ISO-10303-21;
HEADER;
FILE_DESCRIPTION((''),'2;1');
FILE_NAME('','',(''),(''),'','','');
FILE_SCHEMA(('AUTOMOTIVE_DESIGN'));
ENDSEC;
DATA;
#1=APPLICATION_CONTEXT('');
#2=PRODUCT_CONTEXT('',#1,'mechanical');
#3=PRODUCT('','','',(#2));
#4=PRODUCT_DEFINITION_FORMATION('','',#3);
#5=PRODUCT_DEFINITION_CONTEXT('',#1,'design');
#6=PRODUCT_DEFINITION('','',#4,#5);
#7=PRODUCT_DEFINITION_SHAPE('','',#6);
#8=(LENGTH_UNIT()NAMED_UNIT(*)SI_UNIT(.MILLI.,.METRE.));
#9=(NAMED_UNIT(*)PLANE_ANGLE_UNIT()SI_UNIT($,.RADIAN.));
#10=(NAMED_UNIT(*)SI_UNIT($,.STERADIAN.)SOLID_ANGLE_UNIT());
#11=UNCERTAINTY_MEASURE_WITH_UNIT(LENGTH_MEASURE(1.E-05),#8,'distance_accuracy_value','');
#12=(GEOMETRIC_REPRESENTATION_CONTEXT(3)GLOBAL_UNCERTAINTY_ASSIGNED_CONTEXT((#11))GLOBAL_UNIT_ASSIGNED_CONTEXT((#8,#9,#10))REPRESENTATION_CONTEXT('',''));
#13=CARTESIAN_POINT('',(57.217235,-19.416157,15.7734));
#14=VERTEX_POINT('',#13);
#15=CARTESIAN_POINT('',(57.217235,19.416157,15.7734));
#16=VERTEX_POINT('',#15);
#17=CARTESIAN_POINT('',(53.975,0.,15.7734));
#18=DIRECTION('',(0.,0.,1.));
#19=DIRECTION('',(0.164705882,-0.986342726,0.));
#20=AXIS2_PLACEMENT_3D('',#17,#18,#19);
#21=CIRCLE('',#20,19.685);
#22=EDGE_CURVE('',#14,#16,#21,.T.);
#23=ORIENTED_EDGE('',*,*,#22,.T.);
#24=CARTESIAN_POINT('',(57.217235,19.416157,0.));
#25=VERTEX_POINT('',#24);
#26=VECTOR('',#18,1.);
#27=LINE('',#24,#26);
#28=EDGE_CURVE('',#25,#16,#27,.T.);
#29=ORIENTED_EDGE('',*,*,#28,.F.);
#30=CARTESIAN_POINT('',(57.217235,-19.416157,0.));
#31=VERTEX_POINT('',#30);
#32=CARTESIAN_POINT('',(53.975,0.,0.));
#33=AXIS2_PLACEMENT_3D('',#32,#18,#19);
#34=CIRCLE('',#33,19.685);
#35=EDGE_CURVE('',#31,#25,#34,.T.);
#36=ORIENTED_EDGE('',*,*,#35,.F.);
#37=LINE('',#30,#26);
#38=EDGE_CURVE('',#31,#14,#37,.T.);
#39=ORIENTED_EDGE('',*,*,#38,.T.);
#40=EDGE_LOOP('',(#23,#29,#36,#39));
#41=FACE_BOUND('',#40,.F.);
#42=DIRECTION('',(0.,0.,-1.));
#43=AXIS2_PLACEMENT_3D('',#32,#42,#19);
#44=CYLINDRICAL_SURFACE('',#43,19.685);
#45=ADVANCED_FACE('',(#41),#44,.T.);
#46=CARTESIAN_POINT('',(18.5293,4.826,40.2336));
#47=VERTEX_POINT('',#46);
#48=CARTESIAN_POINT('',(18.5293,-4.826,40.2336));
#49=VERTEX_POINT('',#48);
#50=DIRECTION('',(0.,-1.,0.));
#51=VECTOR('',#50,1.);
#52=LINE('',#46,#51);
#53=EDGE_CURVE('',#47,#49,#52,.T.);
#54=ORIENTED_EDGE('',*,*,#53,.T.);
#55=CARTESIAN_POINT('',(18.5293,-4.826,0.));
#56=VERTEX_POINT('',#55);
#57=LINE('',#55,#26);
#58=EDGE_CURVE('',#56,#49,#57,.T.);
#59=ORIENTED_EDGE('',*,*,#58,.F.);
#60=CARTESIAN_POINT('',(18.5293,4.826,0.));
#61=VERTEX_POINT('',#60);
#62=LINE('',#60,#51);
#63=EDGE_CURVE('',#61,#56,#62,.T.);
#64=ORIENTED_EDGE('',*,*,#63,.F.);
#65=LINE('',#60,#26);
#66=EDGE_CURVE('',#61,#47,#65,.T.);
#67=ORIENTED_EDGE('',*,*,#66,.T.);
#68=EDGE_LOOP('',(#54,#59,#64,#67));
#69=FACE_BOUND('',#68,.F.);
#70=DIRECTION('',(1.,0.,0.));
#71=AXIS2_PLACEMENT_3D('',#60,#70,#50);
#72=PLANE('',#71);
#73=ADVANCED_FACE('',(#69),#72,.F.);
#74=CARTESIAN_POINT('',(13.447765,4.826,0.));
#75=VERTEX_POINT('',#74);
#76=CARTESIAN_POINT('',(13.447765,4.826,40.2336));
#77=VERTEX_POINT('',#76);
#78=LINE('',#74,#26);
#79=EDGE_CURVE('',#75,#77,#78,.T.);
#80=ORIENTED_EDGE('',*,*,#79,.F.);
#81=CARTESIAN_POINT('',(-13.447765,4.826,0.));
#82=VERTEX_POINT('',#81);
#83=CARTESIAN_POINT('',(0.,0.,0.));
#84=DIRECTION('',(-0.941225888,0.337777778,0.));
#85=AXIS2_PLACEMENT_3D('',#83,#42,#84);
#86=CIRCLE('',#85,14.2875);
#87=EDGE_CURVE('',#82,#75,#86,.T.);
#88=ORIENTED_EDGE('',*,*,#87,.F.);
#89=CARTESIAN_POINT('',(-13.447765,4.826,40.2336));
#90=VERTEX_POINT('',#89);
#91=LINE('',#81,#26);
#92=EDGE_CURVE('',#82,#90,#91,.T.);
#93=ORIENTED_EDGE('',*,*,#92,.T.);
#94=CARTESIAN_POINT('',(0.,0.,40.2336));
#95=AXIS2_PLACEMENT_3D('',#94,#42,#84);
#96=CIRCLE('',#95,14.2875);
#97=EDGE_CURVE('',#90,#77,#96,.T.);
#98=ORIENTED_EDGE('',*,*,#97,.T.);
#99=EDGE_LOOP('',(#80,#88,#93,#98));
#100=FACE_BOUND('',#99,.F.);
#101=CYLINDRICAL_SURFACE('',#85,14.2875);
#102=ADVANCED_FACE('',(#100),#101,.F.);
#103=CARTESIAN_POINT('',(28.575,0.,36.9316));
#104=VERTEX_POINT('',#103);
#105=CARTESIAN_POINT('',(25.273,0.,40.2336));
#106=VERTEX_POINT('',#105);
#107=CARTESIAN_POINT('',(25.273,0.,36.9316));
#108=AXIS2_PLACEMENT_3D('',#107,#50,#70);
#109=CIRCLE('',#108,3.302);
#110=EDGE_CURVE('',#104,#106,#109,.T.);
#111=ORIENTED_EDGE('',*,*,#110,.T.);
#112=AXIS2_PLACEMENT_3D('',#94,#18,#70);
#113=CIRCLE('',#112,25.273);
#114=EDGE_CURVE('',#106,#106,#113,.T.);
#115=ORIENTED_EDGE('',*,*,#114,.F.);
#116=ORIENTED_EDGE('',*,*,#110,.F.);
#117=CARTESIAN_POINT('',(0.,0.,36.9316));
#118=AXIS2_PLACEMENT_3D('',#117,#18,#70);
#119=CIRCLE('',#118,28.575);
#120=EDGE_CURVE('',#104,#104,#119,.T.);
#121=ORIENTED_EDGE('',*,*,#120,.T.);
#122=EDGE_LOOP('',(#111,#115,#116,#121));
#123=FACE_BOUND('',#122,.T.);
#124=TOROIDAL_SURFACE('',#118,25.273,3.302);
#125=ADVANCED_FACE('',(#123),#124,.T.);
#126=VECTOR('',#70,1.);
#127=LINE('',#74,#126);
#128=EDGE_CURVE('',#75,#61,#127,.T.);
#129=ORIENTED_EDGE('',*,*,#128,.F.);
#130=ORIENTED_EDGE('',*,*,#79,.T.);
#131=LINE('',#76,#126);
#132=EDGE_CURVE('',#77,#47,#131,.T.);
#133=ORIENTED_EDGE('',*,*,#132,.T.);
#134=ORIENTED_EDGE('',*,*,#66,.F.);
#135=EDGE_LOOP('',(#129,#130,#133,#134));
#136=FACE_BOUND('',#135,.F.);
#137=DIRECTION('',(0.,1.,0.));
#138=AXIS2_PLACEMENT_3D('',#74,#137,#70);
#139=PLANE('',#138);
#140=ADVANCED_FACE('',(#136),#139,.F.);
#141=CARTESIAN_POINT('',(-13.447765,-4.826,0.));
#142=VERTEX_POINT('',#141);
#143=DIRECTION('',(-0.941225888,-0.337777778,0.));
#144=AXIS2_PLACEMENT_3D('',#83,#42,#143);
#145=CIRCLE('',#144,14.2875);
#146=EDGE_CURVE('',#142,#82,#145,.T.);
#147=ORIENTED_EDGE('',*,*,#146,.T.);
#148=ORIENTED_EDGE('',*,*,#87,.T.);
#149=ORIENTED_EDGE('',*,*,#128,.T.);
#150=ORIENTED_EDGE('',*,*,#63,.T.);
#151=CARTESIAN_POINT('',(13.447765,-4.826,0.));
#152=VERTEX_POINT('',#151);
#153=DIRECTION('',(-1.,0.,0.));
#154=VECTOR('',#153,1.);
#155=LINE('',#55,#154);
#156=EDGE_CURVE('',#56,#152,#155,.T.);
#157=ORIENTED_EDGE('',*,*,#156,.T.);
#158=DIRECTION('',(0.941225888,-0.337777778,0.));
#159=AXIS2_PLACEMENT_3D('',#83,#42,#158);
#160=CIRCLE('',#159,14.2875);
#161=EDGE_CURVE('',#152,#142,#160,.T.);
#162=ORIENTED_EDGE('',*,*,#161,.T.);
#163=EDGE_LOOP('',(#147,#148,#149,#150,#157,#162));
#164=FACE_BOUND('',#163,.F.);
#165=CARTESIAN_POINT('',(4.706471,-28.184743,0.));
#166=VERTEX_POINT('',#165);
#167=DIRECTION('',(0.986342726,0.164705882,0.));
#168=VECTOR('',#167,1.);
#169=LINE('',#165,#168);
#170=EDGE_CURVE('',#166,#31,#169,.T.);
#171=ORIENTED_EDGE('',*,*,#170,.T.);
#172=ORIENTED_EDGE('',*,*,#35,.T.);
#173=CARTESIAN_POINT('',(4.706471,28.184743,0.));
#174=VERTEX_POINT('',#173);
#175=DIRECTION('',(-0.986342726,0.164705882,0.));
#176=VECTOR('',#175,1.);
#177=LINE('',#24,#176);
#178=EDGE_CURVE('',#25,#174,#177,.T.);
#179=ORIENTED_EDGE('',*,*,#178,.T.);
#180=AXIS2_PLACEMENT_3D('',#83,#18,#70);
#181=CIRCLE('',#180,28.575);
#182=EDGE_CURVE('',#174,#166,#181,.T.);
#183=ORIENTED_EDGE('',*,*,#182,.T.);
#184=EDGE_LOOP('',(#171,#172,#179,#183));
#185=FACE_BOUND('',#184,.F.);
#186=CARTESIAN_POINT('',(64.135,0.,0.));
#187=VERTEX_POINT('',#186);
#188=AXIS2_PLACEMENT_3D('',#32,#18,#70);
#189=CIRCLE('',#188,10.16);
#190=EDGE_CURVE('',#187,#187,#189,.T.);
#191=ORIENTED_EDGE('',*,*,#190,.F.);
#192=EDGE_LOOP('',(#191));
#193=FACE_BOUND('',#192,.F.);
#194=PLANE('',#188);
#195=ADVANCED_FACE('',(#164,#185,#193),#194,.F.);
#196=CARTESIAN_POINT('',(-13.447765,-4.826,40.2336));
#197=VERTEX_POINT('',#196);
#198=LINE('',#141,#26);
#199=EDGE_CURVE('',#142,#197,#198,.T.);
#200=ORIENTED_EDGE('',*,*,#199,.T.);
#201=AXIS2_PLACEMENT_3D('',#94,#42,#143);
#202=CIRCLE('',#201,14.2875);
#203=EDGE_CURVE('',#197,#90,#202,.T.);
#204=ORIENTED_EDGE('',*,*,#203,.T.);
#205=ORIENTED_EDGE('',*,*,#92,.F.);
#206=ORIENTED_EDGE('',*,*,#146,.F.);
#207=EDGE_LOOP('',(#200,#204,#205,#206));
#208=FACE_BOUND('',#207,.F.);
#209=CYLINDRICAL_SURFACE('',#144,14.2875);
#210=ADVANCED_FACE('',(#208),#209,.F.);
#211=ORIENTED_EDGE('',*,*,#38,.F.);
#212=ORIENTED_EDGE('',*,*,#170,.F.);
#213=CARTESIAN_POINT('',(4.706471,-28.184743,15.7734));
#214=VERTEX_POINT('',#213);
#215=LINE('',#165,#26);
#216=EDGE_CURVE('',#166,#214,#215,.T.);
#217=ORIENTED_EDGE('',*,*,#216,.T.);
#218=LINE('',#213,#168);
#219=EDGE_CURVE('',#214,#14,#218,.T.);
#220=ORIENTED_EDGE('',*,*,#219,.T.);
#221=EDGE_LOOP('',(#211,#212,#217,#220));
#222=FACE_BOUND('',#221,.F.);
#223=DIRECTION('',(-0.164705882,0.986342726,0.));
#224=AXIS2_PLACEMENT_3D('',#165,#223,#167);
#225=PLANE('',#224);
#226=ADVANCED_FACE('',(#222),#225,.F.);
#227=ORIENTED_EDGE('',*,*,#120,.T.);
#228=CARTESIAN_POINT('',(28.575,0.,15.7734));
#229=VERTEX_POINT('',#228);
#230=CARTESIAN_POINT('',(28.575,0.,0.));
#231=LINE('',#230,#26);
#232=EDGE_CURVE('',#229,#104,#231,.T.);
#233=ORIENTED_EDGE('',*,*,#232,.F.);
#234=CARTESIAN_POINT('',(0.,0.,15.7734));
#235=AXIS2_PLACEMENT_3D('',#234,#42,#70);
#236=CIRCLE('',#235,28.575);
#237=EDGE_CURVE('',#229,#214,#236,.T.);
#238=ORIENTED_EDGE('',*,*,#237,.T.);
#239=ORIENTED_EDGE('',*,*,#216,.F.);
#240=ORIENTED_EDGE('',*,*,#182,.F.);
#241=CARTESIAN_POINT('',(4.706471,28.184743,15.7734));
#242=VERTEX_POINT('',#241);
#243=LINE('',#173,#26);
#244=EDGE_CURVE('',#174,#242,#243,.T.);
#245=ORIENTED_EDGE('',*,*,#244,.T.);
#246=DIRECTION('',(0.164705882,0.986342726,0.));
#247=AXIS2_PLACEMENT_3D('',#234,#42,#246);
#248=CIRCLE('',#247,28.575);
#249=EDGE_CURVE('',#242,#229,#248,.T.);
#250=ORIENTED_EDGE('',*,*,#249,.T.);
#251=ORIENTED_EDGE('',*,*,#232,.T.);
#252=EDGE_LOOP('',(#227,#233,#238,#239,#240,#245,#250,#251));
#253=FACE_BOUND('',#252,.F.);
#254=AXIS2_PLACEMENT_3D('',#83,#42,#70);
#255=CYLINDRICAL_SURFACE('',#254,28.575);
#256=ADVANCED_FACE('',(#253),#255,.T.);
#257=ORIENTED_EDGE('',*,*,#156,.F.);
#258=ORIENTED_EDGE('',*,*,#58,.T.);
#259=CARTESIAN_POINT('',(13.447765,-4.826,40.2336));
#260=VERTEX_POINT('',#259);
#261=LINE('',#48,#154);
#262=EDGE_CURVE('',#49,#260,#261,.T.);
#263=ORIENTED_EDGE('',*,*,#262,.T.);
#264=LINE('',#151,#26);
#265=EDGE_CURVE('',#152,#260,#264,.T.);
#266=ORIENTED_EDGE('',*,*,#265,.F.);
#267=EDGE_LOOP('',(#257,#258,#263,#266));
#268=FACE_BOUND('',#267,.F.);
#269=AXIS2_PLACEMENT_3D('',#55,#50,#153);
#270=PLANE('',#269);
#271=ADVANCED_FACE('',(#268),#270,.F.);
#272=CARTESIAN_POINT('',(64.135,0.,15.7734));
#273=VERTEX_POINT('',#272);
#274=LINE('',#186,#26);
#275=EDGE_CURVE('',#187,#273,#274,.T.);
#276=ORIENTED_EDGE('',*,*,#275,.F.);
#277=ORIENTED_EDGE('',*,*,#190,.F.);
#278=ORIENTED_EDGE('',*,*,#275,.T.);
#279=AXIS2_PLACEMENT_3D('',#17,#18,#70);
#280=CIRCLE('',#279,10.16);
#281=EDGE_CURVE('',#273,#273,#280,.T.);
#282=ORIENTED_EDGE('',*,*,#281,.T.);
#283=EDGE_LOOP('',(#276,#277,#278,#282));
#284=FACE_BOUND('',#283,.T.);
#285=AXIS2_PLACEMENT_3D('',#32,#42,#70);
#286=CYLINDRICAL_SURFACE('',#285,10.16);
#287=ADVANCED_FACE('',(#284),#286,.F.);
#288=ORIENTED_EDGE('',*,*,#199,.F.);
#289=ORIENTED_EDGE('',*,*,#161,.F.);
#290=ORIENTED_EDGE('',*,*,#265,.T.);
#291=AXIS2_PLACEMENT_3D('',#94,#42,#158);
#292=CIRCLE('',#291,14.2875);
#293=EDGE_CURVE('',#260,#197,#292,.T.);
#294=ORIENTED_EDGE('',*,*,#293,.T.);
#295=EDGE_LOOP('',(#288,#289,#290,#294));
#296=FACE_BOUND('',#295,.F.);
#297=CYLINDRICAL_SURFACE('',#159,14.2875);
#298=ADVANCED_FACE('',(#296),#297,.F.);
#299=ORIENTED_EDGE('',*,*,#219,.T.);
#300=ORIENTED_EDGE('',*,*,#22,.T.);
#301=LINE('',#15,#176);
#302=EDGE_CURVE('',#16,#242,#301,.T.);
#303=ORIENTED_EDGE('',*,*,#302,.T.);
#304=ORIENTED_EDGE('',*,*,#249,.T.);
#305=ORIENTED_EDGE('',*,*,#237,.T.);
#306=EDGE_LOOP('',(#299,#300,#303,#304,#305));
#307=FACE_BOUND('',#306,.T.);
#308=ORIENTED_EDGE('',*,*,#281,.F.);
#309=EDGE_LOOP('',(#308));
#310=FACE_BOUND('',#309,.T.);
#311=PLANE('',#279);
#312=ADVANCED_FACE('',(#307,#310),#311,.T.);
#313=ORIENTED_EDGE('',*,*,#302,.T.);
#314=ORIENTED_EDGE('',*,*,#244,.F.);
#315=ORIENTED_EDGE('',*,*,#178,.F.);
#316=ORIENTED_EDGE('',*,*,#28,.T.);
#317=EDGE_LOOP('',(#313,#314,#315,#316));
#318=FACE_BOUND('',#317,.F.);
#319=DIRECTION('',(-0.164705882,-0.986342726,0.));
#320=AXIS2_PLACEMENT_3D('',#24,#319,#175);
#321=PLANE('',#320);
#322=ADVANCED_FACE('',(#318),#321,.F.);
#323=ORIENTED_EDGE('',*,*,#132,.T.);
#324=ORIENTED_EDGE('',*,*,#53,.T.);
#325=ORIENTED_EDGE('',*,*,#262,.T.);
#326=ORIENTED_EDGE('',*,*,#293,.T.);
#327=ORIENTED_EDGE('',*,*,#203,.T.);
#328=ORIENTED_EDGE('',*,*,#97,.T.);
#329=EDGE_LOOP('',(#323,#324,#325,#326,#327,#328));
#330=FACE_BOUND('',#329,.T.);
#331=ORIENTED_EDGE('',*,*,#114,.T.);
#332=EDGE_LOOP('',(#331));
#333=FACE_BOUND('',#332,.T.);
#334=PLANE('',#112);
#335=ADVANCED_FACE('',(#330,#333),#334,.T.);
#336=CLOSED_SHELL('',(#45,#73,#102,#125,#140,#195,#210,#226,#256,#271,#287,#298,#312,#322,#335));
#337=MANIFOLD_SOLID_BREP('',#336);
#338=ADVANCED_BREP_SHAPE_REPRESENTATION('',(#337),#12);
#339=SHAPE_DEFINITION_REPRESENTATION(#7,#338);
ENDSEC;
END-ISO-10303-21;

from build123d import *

# Parameters (mm, degrees)
F0_R     = 28.575
F1_DEPTH = 40.2336
F2_R     = 10.16
F3_DEPTH = 15.7734
F4_R     = 3.302


# Not quite as in the source:
# - a feature names something its author has since deleted; it is built from what else it names


with BuildPart() as f1:
    # F0 (on Top) → F1 (new body)
    with BuildSketch(Plane.XY):
        Circle(F0_R)
        with BuildLine():
            ThreePointArc((-13.4477648793, 4.826), (0, 14.2875), (13.4477648793, 4.826))
            Line((13.4477648793, 4.826), (18.5293, 4.826))
            Line((18.5293, 4.826), (18.5293, -4.826))
            Line((18.5293, -4.826), (13.4477648793, -4.826))
            ThreePointArc((13.4477648793, -4.826), (0, -14.2875), (-13.4477648793, -4.826))
            Line((-13.4477648793, -4.826), (-18.5293, -4.826))
            Line((-18.5293, -4.826), (-18.5293, 4.826))
            Line((-18.5293, 4.826), (-13.4477648793, 4.826))
        make_face(mode=Mode.SUBTRACT)
        with BuildLine():
            ThreePointArc((-13.4477648793, -4.826), (-14.2875, 0), (-13.4477648793, 4.826))
            Line((-13.4477648793, 4.826), (-18.5293, 4.826))
            Line((-18.5293, 4.826), (-18.5293, -4.826))
            Line((-18.5293, -4.826), (-13.4477648793, -4.826))
        make_face()
    extrude(amount=F1_DEPTH)

    # F2 (on Top) → F3 (join)
    with BuildSketch(Plane.XY):
        with BuildLine():
            ThreePointArc((57.2172352941, -19.4161565532), (68.9970276056, -12.7215530348), (73.66, 0))
            ThreePointArc((73.66, 0), (68.9970276056, 12.7215530348), (57.2172352941, 19.4161565532))
            ThreePointArc((57.2172352941, 19.4161565532), (34.29, 0), (57.2172352941, -19.4161565532))
        make_face()
        with Locations((53.975, 0)):
            Circle(F2_R, mode=Mode.SUBTRACT)
        with BuildLine():
            ThreePointArc((57.2172352941, -19.4161565532), (34.29, 0), (57.2172352941, 19.4161565532))
            Line((57.2172352941, 19.4161565532), (4.7064705882, 28.1847433836))
            ThreePointArc((4.7064705882, 28.1847433836), (21.8061691049, 18.4667705344), (28.575, 0))
            ThreePointArc((28.575, 0), (21.8061691049, -18.4667705344), (4.7064705882, -28.1847433836))
            Line((4.7064705882, -28.1847433836), (57.2172352941, -19.4161565532))
        make_face()
    extrude(amount=F3_DEPTH)

    # F4
    f4_edges = [f1.edges().sort_by_distance(p)[0] for p in [
        (-28.575, 0, 40.2336),
    ]]
    fillet(f4_edges, radius=F4_R)


solid = f1.part
